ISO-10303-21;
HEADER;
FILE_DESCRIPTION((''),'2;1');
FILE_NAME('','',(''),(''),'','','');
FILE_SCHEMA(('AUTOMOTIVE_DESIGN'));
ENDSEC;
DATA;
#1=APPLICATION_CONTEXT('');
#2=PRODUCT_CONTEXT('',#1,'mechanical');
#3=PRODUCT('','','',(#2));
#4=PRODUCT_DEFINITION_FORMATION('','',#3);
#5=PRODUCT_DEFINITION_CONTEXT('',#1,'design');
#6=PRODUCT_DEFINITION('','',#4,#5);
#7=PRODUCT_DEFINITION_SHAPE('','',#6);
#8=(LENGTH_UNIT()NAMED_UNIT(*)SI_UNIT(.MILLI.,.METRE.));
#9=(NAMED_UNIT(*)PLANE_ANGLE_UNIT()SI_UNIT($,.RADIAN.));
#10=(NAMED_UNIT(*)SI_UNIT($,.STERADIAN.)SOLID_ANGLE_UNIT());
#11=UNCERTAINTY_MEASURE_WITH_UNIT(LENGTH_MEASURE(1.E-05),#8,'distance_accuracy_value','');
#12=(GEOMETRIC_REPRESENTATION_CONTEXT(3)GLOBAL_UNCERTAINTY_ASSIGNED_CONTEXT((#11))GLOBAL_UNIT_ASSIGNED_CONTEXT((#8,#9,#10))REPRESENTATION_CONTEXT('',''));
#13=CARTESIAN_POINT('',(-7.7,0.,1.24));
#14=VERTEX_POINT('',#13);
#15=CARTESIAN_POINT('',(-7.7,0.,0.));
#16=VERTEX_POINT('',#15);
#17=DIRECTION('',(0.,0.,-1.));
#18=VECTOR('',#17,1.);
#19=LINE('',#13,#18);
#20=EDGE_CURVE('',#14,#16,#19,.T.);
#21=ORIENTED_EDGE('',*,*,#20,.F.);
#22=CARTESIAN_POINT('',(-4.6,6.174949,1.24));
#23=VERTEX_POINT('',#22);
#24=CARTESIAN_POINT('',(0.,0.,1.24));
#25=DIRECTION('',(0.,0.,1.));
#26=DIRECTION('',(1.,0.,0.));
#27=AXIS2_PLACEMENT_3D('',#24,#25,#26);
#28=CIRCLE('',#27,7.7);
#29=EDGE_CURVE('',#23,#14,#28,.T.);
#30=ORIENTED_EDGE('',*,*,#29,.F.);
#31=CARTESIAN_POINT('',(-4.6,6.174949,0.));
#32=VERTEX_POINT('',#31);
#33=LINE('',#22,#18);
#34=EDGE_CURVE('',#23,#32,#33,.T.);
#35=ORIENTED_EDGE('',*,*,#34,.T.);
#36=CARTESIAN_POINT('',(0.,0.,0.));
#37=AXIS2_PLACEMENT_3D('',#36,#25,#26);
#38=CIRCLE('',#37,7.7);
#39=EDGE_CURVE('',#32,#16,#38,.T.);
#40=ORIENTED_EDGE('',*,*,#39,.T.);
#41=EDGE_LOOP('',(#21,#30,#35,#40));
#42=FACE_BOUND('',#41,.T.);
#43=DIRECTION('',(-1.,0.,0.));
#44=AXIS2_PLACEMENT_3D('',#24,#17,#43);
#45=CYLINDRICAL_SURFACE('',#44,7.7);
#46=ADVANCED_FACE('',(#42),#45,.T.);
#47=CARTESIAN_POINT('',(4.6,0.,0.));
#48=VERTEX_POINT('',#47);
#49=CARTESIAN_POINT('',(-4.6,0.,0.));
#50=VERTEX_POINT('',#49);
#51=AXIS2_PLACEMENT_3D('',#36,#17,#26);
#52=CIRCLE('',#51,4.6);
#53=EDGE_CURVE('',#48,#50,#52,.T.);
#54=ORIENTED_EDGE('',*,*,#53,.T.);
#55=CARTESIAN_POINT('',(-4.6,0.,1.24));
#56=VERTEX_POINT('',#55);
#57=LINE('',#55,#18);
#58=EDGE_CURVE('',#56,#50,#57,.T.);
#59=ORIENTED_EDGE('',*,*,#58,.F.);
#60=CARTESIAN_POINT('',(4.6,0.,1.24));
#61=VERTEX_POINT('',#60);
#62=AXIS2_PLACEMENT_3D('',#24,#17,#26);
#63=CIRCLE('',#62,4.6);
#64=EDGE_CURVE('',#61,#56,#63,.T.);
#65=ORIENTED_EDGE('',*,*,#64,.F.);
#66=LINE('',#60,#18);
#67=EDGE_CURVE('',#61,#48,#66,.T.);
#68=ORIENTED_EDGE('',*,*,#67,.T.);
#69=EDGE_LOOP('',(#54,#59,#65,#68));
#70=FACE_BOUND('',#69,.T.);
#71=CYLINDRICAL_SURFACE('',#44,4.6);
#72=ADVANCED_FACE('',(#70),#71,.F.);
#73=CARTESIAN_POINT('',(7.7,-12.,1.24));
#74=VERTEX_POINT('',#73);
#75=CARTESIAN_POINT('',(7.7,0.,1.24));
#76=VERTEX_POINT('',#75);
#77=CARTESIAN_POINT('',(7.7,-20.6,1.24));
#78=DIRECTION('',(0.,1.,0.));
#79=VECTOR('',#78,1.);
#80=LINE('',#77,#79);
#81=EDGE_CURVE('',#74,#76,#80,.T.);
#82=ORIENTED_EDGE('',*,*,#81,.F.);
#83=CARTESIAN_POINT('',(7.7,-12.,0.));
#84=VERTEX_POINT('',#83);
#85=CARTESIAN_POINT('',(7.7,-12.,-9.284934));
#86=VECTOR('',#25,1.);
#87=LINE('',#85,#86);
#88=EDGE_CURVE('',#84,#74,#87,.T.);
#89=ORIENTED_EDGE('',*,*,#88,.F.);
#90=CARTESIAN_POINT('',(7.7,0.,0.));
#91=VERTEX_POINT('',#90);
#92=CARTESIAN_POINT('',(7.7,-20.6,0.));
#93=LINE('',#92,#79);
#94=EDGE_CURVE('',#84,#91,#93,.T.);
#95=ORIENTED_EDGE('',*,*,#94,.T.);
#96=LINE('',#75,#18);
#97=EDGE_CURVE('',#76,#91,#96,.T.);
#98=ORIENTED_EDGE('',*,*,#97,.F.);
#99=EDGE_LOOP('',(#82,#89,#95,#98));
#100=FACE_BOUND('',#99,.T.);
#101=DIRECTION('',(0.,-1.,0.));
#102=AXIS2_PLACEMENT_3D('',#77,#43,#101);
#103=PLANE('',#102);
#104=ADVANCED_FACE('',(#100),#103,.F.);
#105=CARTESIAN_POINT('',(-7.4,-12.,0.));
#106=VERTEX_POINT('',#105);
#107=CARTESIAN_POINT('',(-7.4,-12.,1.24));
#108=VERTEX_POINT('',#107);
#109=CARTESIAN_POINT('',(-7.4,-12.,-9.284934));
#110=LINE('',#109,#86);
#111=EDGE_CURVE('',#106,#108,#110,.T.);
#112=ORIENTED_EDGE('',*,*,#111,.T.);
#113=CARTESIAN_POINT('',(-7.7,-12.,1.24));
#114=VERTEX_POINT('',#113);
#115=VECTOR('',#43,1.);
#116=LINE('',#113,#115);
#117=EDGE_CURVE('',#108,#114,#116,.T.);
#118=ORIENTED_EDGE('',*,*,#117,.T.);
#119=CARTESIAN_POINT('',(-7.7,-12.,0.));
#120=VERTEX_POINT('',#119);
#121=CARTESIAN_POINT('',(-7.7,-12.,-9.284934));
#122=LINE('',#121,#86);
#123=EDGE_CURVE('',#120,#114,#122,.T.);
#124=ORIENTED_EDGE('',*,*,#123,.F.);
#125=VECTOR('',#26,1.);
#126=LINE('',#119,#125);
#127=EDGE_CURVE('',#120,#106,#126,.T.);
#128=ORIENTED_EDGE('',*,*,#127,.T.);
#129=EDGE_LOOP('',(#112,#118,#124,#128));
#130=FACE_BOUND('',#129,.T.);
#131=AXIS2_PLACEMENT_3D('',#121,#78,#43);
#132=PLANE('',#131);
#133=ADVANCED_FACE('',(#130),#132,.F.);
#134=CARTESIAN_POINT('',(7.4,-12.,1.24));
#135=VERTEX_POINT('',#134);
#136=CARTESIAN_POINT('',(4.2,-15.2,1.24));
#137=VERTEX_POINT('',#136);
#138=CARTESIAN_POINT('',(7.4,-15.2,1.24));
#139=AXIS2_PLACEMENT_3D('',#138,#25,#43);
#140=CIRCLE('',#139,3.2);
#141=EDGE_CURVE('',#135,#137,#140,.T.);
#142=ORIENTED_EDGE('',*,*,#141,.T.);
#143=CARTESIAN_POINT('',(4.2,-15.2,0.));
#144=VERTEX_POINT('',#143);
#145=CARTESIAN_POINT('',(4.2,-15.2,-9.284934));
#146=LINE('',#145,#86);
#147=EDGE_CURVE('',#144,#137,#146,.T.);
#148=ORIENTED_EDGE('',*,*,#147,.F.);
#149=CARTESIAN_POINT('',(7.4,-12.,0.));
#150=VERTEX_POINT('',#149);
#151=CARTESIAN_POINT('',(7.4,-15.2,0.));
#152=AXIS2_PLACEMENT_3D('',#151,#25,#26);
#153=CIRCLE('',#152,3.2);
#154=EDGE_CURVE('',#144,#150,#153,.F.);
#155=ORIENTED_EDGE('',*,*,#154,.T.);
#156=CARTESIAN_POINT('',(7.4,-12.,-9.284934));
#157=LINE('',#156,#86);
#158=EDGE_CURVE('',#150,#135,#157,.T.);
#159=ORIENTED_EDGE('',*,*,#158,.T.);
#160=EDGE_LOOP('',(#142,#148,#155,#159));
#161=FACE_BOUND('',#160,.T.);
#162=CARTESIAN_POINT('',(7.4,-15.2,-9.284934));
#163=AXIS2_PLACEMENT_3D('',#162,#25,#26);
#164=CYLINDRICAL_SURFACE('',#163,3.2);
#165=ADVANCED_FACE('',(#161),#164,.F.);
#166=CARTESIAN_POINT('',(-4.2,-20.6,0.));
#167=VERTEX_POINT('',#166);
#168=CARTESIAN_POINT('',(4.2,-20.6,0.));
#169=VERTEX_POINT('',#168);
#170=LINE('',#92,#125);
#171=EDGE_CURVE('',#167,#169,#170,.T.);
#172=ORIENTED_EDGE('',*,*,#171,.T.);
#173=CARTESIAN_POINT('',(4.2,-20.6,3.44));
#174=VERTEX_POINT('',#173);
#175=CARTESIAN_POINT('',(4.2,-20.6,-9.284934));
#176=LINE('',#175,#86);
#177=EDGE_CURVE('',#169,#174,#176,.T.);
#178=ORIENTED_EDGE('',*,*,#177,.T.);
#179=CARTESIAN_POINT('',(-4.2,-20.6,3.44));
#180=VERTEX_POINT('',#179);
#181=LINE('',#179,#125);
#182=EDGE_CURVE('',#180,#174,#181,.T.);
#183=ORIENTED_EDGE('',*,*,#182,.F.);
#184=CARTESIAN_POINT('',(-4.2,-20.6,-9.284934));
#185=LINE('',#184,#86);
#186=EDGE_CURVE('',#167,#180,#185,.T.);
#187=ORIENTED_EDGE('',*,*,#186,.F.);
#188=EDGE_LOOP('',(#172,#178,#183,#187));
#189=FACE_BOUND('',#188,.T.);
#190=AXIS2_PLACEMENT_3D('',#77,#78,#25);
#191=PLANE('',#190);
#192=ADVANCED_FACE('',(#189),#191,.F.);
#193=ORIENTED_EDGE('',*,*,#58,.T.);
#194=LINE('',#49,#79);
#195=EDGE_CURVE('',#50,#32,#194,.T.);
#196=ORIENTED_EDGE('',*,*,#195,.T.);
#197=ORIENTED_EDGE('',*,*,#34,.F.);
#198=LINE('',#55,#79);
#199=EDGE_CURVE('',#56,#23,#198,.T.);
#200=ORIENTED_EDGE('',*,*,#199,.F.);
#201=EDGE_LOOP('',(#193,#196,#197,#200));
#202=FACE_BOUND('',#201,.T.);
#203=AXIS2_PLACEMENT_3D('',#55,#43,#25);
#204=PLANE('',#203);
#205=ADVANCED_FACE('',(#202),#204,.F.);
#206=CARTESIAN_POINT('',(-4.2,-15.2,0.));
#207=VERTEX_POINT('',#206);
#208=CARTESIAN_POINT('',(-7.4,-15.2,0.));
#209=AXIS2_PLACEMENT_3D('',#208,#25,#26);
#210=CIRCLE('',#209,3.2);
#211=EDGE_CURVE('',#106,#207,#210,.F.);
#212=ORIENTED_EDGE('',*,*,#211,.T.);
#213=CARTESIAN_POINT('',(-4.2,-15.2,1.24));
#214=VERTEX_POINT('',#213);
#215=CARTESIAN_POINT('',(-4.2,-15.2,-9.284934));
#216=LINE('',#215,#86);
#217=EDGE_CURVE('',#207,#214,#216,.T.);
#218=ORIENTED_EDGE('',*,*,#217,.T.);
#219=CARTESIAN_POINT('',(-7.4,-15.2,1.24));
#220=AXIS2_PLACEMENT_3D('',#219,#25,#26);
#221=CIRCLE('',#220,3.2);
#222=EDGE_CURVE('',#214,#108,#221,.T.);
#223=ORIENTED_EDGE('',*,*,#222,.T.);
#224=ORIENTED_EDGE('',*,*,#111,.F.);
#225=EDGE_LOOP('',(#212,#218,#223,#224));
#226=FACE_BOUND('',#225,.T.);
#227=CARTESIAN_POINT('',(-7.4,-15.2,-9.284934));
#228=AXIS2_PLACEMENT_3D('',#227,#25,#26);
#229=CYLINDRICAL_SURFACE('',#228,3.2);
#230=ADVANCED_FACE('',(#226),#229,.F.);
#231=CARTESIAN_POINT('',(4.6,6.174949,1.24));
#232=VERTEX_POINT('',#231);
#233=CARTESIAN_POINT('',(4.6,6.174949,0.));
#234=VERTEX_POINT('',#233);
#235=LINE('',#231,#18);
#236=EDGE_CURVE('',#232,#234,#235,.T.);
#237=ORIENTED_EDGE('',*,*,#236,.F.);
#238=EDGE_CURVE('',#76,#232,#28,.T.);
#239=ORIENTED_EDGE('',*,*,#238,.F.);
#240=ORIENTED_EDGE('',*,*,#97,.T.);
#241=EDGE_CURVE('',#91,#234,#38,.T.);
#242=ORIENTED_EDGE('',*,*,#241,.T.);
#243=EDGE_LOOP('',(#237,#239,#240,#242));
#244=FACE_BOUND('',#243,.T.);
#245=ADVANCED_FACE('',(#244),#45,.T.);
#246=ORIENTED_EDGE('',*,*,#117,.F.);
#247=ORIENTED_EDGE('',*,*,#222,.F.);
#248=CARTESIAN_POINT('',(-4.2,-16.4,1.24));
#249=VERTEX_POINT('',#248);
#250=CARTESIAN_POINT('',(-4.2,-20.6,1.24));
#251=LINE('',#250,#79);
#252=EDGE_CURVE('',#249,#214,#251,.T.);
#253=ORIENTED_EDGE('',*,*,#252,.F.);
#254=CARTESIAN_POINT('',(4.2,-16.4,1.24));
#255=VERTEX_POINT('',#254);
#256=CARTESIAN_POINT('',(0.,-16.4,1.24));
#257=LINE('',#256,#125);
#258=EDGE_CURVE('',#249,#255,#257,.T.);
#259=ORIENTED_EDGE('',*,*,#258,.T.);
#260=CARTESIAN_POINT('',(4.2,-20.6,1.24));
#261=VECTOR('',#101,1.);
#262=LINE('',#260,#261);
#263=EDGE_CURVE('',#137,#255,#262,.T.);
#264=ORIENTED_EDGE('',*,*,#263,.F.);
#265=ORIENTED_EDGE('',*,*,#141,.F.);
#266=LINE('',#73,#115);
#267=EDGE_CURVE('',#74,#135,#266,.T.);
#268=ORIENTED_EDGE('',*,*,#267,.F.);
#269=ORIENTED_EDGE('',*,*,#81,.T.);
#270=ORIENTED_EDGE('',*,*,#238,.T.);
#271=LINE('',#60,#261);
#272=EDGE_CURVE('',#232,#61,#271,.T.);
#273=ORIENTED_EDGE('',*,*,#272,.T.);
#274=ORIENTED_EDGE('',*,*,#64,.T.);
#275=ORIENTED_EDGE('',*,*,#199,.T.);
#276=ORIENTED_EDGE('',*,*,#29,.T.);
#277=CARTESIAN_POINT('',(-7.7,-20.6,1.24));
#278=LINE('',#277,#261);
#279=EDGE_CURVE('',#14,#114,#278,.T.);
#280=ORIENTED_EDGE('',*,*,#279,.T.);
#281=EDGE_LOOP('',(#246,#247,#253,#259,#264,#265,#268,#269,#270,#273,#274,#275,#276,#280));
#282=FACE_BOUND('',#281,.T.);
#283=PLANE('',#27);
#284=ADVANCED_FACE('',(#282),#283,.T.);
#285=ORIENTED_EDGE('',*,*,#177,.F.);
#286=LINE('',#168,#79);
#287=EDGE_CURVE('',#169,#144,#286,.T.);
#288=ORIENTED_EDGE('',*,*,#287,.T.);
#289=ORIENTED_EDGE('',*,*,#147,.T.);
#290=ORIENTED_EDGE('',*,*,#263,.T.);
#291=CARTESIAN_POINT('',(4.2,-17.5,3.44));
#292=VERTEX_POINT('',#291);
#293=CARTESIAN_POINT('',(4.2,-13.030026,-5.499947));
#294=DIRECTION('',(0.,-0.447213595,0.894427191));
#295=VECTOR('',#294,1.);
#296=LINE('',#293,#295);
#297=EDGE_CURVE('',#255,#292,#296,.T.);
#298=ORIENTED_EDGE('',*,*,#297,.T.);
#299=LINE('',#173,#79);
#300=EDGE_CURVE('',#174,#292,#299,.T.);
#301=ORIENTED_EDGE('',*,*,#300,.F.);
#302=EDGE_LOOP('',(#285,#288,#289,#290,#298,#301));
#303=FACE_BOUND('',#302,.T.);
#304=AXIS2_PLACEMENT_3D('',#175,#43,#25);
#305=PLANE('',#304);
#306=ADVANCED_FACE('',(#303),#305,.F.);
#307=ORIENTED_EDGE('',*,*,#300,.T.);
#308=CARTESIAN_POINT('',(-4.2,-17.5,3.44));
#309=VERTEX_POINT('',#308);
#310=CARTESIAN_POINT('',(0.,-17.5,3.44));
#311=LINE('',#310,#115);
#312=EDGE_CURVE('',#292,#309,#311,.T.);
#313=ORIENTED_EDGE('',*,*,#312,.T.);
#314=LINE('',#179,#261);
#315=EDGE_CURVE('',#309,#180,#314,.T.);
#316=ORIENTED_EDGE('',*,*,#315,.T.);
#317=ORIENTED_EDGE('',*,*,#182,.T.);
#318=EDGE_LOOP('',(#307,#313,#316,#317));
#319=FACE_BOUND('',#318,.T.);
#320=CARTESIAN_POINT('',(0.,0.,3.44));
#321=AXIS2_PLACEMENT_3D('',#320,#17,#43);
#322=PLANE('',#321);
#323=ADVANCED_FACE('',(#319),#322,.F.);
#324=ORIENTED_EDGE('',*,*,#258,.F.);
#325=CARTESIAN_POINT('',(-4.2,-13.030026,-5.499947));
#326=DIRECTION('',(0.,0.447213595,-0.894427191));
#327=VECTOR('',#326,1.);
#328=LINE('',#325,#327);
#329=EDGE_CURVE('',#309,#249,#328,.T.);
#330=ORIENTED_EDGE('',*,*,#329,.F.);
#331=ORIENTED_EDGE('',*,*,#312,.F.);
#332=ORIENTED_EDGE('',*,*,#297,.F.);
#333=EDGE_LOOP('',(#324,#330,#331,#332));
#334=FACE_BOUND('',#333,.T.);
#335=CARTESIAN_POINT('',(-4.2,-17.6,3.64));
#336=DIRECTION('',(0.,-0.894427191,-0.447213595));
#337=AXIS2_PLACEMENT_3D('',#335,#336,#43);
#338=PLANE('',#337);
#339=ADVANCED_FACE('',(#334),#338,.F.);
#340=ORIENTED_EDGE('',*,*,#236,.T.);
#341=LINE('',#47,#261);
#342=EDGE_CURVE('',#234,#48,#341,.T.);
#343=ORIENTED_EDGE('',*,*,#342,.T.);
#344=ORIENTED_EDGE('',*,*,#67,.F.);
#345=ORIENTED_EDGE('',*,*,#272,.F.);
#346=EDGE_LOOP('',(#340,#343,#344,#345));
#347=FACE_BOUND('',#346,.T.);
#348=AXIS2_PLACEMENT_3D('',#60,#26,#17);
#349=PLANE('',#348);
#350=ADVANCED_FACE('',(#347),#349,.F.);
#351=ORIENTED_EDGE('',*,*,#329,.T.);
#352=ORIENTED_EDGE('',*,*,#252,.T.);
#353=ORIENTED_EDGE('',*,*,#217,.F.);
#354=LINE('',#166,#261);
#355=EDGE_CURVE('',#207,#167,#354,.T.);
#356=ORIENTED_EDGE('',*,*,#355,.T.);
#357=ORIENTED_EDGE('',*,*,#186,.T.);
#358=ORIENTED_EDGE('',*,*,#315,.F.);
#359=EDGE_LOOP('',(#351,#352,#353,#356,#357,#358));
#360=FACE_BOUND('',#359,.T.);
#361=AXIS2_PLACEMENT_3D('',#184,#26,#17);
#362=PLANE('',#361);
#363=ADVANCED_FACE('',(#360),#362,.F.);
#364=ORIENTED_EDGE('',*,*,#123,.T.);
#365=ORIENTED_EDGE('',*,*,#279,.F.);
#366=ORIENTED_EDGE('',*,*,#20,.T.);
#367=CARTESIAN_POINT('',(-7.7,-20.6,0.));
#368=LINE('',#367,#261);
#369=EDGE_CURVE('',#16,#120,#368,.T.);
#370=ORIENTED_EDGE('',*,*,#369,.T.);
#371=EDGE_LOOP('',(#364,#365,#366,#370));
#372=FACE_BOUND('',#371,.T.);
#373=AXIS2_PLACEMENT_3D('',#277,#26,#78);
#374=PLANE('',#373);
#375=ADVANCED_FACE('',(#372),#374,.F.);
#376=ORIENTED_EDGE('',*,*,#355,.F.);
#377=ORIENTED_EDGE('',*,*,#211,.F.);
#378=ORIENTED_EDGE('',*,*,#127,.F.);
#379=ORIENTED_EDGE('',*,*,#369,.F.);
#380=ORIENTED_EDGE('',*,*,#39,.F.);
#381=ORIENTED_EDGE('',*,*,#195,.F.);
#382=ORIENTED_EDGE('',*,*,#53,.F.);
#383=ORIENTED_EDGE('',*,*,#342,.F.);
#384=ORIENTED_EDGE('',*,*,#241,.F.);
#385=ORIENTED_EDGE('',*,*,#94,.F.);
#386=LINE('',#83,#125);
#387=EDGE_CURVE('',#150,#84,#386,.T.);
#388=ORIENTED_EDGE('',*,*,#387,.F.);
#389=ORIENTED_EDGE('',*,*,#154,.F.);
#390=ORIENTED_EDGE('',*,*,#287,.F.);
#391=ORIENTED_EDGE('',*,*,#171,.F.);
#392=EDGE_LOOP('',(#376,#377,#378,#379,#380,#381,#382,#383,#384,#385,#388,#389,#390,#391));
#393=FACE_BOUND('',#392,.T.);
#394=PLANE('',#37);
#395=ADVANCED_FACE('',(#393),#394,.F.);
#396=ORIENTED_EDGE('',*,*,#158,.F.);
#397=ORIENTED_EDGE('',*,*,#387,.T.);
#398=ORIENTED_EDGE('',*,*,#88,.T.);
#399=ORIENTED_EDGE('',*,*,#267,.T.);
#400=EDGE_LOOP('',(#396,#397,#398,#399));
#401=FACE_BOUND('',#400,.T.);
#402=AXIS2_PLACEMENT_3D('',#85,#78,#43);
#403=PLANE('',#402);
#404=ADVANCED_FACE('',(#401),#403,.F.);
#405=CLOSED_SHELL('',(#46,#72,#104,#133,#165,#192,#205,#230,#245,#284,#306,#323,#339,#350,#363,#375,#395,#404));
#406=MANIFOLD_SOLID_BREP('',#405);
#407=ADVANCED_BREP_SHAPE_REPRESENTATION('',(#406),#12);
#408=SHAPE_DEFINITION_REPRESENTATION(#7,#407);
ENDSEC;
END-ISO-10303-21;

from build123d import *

# Parameters (mm, degrees)
EXTRUDE_1_DEPTH     = 1.24
CUT_EXTRUDE_1_DEPTH = 1.24
SKETCH_4_W          = 8.4
SKETCH_4_H          = 3
EXTRUDE_2_DEPTH     = 2.2
CHAMFER_1_SIZE      = 1.2
CHAMFER_1_SIZE_2    = 2.4


with BuildPart() as part:
    # Эскиз1 → Бобышка-Вытянуть1 (new body)
    with BuildSketch(Plane.XY):
        with BuildLine():
            Line((-4.6, 0), (-4.6, 6.174949393))
            ThreePointArc((-4.6, 6.174949393), (-6.88149693, 3.454706934), (-7.7, 0))
            Line((-7.7, 0), (-7.7, -20.6))
            Line((-7.7, -20.6), (7.7, -20.6))
            Line((7.7, -20.6), (7.7, 0))
            ThreePointArc((7.7, 0), (6.88149693, 3.454706934), (4.6, 6.174949393))
            Line((4.6, 6.174949393), (4.6, 0))
            ThreePointArc((4.6, 0), (0, -4.6), (-4.6, 0))
        make_face()
    extrude(amount=EXTRUDE_1_DEPTH)

    # Эскиз3 → Вырез-Вытянуть1 (cut)
    with BuildSketch(Plane.XY.offset(1.24)):
        with BuildLine():
            Line((-7.7, -20.6), (-4.2, -20.6))
            Line((-4.2, -20.6), (-4.2, -15.2))
            ThreePointArc((-4.2, -15.2), (-5.1372583, -12.9372583), (-7.4, -12))
            Line((-7.4, -12), (-7.7, -12))
            Line((-7.7, -12), (-7.7, -20.6))
        make_face()
        with BuildLine():
            Line((4.2, -20.6), (4.2, -15.2))
            ThreePointArc((4.2, -15.2), (5.1372583, -12.9372583), (7.4, -12))
            Line((7.4, -12), (7.7, -12))
            Line((7.7, -12), (7.7, -20.6))
            Line((7.7, -20.6), (4.2, -20.6))
        make_face()
    extrude(amount=-CUT_EXTRUDE_1_DEPTH, mode=Mode.SUBTRACT)

    # Эскиз4 → Бобышка-Вытянуть2 (add)
    with BuildSketch(Plane.XY.offset(1.24)):
        with Locations((0, -19.1)):
            Rectangle(SKETCH_4_W, SKETCH_4_H)
    extrude(amount=EXTRUDE_2_DEPTH)

    # Фаска1
    # the kernel refuses this chamfer: 2.4, 1.2 mm, written as the material it adds along each edge
    with BuildSketch(Plane(origin=(4.2, -17.6, 1.24), x_dir=(0, 0.9976223042390325, -0.06891834360170876), z_dir=(-1, 0, 0))) as chamfer_1_piece_1_section:
        Polygon((CHAMFER_1_SIZE * 0.997622304239, -CHAMFER_1_SIZE * 0.0689183436017), (-CHAMFER_1_SIZE_2 * 0.0689183436017, -CHAMFER_1_SIZE_2 * 0.997622304239), (0, 0), align=None)
    chamfer_1_piece_1 = extrude(amount=8.4, mode=Mode.PRIVATE)
    chamfer_1_piece_1 = split(chamfer_1_piece_1, bisect_by=Plane(origin=(0, -17.211387721, 3.44), z_dir=(0, 0, -1)), keep=Keep.TOP, mode=Mode.PRIVATE)
    add(chamfer_1_piece_1)


solid = part.part
